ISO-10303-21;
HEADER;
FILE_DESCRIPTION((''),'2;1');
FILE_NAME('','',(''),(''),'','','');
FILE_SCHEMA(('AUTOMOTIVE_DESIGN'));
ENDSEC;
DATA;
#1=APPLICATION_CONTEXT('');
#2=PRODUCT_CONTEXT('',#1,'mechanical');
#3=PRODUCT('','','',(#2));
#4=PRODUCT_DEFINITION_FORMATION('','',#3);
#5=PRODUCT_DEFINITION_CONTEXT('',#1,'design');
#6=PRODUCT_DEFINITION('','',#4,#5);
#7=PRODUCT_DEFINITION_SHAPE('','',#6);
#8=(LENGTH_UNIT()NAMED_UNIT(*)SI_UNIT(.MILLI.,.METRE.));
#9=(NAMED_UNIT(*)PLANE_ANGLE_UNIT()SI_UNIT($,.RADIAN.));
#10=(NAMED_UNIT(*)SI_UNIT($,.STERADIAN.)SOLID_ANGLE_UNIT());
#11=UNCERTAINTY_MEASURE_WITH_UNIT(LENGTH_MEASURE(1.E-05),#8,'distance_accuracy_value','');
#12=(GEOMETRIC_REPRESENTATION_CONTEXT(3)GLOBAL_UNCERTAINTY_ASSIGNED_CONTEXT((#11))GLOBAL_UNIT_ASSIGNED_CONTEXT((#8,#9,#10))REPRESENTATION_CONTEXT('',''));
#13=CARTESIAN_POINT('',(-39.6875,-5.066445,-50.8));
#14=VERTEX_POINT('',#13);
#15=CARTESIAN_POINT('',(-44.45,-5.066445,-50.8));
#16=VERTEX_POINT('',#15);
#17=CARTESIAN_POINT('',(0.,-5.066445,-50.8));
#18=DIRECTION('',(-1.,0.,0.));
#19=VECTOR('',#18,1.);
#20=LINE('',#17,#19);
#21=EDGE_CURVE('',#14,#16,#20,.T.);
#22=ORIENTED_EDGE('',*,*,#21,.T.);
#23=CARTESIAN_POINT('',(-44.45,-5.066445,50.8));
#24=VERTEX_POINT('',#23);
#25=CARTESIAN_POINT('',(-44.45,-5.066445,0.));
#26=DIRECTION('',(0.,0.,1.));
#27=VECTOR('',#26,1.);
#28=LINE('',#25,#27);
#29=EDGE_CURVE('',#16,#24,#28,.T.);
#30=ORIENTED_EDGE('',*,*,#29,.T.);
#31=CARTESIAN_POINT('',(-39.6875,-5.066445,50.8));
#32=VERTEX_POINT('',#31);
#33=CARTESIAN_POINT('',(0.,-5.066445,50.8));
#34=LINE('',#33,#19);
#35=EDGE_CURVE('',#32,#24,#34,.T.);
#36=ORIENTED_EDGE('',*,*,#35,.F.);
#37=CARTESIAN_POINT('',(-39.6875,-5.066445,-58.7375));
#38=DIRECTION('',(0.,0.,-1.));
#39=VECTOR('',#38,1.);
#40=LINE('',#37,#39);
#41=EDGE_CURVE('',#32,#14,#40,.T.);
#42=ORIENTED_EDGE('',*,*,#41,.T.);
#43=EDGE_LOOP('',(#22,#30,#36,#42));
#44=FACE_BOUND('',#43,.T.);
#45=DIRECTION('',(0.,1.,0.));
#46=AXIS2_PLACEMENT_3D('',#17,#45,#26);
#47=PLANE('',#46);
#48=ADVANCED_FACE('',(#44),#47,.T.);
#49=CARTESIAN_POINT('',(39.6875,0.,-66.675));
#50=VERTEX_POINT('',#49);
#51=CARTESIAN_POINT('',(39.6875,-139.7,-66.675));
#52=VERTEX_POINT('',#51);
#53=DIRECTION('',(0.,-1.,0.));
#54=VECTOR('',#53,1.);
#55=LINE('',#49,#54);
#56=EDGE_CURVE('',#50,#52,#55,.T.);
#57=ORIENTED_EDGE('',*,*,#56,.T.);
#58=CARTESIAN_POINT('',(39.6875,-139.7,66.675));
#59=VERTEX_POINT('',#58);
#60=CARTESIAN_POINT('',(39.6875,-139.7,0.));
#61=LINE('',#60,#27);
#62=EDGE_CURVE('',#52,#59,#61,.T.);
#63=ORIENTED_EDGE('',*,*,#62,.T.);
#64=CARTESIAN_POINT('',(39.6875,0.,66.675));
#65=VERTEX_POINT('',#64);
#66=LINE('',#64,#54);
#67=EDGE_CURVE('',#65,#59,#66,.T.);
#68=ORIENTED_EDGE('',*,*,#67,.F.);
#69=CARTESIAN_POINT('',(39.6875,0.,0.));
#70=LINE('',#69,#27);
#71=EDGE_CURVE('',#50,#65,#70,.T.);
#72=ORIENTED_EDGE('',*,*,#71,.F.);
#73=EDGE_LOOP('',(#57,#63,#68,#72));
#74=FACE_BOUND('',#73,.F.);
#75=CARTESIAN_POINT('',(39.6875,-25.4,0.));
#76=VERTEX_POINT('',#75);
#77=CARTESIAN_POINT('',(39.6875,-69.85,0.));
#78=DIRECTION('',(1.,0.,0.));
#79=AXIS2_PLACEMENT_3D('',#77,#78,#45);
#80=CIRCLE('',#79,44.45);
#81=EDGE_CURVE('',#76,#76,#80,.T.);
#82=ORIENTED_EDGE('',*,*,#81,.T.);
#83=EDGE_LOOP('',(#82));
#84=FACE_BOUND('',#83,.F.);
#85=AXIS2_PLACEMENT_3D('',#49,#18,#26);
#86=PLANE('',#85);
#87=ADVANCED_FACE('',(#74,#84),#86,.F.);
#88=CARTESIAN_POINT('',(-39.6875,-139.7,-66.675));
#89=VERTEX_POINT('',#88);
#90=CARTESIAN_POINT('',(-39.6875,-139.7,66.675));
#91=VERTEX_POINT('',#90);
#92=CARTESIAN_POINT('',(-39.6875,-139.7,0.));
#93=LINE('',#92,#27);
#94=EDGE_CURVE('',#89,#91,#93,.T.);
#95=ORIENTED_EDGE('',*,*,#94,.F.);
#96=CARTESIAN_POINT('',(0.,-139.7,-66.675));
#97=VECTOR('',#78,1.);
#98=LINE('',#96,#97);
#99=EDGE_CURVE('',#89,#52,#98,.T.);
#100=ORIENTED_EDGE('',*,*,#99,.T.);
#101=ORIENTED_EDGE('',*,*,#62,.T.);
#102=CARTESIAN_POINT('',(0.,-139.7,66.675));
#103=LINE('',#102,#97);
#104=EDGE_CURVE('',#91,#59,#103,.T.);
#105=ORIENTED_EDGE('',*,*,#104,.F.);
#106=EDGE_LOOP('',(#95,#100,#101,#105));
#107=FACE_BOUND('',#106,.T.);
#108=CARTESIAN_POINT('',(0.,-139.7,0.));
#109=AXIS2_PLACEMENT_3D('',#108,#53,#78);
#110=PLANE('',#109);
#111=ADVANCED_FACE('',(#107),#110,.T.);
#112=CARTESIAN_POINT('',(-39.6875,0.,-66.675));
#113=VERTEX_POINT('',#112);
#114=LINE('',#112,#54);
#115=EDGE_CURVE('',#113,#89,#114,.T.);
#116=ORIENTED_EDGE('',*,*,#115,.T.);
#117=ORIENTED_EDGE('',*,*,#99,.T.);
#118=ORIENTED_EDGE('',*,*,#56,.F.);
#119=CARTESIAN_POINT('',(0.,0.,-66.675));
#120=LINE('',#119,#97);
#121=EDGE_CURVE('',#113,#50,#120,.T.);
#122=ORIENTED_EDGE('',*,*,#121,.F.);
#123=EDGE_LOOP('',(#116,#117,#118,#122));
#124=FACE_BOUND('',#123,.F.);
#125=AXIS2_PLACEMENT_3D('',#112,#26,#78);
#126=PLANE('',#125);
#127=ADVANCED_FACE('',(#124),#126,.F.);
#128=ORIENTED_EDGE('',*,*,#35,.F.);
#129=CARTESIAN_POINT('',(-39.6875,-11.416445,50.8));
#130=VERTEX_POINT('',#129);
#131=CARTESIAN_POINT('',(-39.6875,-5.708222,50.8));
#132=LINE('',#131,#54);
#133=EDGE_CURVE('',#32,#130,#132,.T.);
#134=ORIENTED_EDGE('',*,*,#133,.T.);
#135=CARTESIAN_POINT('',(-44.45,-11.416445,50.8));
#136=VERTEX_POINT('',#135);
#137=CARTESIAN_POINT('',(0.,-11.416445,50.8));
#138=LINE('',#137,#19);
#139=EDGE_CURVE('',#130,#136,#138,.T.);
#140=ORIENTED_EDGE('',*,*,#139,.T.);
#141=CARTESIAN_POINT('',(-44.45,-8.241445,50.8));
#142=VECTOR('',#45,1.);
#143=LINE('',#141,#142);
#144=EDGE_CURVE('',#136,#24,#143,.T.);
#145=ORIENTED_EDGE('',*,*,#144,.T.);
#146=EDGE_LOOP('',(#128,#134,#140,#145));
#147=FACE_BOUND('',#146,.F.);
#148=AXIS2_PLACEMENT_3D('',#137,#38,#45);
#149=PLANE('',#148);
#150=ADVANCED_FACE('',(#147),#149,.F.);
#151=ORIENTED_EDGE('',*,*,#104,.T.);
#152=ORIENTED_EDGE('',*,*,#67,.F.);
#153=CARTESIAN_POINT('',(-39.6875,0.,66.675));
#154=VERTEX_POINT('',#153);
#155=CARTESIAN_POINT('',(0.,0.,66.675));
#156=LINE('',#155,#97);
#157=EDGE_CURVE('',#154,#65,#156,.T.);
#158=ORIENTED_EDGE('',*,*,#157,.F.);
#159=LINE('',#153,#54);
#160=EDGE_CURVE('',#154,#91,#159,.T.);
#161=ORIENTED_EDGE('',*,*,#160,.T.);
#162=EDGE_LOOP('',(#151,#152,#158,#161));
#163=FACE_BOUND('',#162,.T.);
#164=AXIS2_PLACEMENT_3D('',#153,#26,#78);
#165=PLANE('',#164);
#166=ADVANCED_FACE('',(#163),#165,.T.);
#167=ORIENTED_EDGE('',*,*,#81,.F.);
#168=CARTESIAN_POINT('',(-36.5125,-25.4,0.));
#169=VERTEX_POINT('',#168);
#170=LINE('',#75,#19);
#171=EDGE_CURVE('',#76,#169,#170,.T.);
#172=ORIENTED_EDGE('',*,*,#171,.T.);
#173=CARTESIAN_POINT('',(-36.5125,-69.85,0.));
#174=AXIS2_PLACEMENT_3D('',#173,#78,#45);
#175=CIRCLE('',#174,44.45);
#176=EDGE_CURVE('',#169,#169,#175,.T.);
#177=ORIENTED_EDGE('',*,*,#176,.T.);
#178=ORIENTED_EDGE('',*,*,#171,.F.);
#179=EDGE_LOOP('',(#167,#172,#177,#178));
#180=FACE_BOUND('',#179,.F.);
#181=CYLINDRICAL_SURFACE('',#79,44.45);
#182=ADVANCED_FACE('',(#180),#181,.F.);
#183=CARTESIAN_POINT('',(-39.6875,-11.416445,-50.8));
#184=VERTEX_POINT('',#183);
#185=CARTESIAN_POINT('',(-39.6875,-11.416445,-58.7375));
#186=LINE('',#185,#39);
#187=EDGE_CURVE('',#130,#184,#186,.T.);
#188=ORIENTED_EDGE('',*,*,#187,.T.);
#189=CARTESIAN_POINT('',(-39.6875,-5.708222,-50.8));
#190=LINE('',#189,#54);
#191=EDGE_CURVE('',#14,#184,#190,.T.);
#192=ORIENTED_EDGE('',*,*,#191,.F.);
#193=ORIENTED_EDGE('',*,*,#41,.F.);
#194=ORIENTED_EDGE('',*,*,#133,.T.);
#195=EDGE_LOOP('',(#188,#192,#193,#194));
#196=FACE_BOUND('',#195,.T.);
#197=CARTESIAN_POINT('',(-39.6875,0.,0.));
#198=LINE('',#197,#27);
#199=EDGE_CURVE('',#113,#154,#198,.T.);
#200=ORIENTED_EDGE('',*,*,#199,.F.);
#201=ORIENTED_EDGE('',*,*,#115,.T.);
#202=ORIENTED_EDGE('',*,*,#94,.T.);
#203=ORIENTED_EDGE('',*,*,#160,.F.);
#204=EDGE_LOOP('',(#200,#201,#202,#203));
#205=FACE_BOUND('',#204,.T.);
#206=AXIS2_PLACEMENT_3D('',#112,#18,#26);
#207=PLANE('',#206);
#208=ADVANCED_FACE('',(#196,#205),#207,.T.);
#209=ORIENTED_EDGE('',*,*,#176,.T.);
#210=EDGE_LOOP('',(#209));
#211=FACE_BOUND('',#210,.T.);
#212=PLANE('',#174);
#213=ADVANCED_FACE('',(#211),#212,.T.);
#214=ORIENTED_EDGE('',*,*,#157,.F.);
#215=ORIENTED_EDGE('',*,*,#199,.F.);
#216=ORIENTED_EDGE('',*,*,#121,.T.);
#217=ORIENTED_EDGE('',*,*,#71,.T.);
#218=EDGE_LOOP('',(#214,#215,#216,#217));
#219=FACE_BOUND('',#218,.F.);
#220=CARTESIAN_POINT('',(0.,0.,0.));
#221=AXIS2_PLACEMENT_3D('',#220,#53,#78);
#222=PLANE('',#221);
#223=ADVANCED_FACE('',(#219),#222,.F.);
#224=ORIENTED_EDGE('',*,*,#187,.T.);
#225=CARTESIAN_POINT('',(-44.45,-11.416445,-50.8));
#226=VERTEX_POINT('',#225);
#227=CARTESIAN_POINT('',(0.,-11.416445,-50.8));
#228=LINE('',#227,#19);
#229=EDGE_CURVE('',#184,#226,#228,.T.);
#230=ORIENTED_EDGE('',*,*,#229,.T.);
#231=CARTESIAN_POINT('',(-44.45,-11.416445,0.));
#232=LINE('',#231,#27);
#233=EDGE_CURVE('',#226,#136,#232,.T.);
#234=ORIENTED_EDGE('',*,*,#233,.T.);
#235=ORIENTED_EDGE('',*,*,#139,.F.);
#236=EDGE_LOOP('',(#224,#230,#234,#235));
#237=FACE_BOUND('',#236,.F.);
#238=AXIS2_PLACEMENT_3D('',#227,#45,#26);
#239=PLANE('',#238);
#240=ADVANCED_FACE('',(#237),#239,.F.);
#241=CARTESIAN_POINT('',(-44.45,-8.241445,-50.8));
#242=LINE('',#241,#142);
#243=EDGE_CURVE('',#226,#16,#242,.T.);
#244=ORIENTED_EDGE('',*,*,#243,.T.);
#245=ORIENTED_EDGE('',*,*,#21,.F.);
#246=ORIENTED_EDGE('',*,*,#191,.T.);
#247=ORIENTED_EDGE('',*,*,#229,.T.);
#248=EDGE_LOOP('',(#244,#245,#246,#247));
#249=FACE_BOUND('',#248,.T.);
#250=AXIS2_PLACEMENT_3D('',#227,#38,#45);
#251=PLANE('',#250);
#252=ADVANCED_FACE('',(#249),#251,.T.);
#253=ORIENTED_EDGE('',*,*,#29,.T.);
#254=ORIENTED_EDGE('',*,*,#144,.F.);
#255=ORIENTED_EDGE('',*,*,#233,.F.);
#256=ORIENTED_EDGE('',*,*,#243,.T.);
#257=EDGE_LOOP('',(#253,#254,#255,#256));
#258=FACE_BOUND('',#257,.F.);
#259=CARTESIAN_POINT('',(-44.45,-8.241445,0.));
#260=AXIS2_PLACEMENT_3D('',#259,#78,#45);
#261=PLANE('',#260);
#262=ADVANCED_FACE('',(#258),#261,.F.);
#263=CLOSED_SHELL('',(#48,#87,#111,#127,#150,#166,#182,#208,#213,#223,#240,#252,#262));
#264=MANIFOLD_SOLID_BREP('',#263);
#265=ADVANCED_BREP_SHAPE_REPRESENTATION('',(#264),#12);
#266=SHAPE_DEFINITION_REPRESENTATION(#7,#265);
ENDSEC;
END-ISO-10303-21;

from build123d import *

# Parameters (mm, degrees)
F0_W     = 79.375
F0_H     = 133.35
F1_DEPTH = 139.7
F2_R     = 44.45
F3_DEPTH = 76.2
F4_W     = 6.35
F4_H     = 101.6
F5_DEPTH = 44.45


# Not quite as in the source:
# - a feature names something its author has since deleted; it is built from what else it names


with BuildPart() as f1:
    # F0 (on Front) → F1 (new body)
    with BuildSketch(Plane.XZ):
        Rectangle(F0_W, F0_H)
    extrude(amount=F1_DEPTH)

    # F2 (on face) → F3 (cut)
    with BuildSketch(Plane.YZ.offset(39.6875)):
        with Locations((-69.85, 0)):
            Circle(F2_R)
    extrude(amount=-F3_DEPTH, mode=Mode.SUBTRACT)

    # F4 (on Right) → F5 (join)
    with BuildSketch(Plane.YZ):
        with Locations((-8.2414448261, 0)):
            Rectangle(F4_W, F4_H)
    extrude(amount=-F5_DEPTH)


solid = f1.part
